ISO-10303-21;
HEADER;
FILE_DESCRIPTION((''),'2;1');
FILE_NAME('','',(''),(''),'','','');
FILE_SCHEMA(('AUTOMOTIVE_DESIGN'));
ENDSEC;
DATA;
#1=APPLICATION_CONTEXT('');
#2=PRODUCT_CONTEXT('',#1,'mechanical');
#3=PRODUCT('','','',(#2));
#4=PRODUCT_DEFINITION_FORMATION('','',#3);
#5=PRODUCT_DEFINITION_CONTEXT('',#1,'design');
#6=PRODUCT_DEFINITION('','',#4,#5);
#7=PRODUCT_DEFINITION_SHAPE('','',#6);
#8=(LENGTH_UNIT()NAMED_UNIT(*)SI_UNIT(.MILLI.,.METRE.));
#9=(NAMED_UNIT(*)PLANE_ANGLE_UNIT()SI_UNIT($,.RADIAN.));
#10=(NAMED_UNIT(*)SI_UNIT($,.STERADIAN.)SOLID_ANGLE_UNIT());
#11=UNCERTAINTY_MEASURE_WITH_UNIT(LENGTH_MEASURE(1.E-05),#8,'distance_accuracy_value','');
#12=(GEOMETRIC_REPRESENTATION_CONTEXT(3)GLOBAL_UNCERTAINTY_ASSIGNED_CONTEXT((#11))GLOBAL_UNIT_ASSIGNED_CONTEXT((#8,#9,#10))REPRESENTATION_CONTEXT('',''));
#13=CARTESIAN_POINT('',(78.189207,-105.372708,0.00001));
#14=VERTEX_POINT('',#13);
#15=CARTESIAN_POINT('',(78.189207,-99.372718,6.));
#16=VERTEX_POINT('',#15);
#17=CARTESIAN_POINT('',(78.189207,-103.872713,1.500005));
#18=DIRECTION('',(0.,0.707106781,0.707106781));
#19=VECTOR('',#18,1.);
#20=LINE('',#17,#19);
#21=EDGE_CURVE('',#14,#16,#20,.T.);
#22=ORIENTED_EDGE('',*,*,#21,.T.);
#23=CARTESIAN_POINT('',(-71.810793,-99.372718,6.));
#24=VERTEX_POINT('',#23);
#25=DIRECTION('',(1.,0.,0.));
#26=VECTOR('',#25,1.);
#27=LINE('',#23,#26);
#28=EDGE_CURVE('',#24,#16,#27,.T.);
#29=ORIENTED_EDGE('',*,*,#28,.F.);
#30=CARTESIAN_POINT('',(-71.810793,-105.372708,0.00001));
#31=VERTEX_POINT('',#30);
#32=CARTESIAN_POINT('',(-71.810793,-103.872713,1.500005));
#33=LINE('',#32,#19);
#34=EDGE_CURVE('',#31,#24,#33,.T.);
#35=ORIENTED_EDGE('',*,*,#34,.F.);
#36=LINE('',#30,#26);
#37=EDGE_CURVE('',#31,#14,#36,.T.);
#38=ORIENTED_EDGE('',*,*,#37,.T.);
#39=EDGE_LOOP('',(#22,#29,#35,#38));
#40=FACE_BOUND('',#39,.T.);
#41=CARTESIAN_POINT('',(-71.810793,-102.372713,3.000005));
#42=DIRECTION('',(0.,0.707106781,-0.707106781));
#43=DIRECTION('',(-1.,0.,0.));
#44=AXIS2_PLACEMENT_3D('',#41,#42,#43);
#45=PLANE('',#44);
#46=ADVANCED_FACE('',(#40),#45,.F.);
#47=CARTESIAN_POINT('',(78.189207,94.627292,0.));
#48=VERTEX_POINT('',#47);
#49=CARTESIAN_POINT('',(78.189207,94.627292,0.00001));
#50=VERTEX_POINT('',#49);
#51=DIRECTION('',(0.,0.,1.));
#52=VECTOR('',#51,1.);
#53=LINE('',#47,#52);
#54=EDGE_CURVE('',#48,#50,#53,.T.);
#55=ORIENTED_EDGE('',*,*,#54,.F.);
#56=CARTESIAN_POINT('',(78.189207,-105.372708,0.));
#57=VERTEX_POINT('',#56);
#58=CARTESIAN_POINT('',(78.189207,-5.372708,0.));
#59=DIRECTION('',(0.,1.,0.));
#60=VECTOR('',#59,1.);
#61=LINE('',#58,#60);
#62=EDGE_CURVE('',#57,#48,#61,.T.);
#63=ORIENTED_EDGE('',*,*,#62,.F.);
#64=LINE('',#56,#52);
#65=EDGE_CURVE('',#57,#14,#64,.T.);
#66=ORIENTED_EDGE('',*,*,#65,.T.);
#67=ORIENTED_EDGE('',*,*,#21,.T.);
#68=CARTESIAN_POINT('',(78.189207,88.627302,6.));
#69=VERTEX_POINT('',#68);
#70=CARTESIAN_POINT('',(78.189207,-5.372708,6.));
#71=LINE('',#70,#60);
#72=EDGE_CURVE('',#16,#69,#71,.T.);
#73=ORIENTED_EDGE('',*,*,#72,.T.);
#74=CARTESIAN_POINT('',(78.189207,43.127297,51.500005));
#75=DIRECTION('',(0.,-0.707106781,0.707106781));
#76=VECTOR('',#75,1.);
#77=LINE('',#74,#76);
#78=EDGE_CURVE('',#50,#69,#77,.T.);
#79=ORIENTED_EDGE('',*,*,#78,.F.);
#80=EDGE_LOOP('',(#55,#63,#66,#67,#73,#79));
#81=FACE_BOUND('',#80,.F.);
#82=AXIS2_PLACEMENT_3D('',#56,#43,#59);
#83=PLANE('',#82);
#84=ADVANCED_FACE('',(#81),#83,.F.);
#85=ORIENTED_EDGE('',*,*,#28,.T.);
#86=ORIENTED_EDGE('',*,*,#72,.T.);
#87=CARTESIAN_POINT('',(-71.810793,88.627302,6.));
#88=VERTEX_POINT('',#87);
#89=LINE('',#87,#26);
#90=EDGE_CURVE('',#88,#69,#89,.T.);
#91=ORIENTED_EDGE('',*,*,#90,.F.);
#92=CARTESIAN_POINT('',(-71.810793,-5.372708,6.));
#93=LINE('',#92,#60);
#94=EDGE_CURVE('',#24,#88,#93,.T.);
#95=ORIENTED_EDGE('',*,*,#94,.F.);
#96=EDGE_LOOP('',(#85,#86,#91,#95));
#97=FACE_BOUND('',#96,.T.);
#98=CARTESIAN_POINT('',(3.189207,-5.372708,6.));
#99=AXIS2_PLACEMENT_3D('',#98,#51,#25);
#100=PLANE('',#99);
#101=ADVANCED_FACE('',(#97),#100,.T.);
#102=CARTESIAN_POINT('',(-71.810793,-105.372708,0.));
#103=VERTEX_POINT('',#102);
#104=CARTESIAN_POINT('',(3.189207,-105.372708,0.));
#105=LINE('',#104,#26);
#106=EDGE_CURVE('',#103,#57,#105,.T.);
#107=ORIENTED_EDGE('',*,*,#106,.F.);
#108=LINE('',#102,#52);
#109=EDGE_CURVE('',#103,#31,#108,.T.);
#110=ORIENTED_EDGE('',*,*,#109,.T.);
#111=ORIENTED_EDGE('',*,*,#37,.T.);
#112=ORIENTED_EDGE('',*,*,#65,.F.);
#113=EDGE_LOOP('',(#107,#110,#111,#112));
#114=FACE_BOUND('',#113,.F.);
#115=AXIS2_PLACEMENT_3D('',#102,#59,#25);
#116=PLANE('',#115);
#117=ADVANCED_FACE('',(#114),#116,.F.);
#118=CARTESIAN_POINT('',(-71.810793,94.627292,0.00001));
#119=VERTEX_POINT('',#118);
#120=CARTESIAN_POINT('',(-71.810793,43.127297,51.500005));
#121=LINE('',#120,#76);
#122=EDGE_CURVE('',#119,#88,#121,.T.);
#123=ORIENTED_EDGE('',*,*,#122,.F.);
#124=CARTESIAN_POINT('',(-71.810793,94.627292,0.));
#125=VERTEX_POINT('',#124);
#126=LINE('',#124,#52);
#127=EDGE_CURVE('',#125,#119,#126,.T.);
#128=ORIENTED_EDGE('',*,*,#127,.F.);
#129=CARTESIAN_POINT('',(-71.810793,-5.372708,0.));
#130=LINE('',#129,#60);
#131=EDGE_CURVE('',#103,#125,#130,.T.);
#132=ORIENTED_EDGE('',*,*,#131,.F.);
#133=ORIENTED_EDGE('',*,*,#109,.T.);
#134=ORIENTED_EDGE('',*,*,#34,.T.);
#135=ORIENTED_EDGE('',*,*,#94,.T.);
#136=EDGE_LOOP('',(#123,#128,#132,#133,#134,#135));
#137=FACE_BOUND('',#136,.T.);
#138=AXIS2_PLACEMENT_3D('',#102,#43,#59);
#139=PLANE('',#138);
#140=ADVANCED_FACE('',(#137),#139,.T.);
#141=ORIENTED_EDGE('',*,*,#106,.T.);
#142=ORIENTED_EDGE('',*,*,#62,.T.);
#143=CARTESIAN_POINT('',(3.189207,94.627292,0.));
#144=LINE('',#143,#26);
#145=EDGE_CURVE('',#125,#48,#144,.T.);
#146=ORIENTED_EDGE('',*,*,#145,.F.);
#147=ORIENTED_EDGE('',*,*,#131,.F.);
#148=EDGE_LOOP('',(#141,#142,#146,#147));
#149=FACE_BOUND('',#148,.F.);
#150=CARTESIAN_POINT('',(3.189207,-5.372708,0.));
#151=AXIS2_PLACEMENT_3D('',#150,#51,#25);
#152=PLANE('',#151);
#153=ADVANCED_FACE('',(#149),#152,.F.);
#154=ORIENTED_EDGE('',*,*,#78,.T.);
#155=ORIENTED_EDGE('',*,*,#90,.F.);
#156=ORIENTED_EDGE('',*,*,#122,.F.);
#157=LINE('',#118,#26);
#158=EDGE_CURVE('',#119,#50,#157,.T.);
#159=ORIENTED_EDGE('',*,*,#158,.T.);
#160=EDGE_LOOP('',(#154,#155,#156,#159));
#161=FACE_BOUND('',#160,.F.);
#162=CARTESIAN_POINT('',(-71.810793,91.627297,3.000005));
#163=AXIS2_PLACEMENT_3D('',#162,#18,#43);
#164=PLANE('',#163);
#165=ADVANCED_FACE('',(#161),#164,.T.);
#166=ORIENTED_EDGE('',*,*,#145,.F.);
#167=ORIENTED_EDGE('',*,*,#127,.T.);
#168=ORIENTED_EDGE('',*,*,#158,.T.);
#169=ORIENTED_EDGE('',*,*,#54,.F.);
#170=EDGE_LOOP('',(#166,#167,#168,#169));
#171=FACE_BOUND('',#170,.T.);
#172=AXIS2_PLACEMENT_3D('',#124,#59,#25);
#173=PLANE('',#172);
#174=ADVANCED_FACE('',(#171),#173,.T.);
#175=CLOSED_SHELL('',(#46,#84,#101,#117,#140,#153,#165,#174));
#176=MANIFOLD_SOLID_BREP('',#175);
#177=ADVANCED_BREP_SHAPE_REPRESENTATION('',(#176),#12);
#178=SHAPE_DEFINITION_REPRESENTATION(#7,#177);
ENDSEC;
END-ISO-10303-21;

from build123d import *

# Parameters (mm, degrees)
F0_W     = 150
F0_H     = 200
F1_DEPTH = 6
F2_SIZE  = 5.99999


# Not quite as in the source:
# - a fillet or chamfer is up to 0.001 mm smaller than in the source, because OpenCascade refuses the exact size


with BuildPart() as f1:
    # F0 (on Top) → F1 (new body)
    with BuildSketch(Plane.XY):
        with Locations((3.189206589, -5.372708199)):
            Rectangle(F0_W, F0_H)
    extrude(amount=F1_DEPTH)

    # F2 (size 6 in the source; OpenCascade refuses exactly that, so slightly less here)
    f2_edges = [f1.edges().sort_by_distance(p)[0] for p in [
        (3.189207, -105.372708, 6),
        (3.189207, 94.627292, 6),
    ]]
    chamfer(f2_edges, length=F2_SIZE)


solid = f1.part
